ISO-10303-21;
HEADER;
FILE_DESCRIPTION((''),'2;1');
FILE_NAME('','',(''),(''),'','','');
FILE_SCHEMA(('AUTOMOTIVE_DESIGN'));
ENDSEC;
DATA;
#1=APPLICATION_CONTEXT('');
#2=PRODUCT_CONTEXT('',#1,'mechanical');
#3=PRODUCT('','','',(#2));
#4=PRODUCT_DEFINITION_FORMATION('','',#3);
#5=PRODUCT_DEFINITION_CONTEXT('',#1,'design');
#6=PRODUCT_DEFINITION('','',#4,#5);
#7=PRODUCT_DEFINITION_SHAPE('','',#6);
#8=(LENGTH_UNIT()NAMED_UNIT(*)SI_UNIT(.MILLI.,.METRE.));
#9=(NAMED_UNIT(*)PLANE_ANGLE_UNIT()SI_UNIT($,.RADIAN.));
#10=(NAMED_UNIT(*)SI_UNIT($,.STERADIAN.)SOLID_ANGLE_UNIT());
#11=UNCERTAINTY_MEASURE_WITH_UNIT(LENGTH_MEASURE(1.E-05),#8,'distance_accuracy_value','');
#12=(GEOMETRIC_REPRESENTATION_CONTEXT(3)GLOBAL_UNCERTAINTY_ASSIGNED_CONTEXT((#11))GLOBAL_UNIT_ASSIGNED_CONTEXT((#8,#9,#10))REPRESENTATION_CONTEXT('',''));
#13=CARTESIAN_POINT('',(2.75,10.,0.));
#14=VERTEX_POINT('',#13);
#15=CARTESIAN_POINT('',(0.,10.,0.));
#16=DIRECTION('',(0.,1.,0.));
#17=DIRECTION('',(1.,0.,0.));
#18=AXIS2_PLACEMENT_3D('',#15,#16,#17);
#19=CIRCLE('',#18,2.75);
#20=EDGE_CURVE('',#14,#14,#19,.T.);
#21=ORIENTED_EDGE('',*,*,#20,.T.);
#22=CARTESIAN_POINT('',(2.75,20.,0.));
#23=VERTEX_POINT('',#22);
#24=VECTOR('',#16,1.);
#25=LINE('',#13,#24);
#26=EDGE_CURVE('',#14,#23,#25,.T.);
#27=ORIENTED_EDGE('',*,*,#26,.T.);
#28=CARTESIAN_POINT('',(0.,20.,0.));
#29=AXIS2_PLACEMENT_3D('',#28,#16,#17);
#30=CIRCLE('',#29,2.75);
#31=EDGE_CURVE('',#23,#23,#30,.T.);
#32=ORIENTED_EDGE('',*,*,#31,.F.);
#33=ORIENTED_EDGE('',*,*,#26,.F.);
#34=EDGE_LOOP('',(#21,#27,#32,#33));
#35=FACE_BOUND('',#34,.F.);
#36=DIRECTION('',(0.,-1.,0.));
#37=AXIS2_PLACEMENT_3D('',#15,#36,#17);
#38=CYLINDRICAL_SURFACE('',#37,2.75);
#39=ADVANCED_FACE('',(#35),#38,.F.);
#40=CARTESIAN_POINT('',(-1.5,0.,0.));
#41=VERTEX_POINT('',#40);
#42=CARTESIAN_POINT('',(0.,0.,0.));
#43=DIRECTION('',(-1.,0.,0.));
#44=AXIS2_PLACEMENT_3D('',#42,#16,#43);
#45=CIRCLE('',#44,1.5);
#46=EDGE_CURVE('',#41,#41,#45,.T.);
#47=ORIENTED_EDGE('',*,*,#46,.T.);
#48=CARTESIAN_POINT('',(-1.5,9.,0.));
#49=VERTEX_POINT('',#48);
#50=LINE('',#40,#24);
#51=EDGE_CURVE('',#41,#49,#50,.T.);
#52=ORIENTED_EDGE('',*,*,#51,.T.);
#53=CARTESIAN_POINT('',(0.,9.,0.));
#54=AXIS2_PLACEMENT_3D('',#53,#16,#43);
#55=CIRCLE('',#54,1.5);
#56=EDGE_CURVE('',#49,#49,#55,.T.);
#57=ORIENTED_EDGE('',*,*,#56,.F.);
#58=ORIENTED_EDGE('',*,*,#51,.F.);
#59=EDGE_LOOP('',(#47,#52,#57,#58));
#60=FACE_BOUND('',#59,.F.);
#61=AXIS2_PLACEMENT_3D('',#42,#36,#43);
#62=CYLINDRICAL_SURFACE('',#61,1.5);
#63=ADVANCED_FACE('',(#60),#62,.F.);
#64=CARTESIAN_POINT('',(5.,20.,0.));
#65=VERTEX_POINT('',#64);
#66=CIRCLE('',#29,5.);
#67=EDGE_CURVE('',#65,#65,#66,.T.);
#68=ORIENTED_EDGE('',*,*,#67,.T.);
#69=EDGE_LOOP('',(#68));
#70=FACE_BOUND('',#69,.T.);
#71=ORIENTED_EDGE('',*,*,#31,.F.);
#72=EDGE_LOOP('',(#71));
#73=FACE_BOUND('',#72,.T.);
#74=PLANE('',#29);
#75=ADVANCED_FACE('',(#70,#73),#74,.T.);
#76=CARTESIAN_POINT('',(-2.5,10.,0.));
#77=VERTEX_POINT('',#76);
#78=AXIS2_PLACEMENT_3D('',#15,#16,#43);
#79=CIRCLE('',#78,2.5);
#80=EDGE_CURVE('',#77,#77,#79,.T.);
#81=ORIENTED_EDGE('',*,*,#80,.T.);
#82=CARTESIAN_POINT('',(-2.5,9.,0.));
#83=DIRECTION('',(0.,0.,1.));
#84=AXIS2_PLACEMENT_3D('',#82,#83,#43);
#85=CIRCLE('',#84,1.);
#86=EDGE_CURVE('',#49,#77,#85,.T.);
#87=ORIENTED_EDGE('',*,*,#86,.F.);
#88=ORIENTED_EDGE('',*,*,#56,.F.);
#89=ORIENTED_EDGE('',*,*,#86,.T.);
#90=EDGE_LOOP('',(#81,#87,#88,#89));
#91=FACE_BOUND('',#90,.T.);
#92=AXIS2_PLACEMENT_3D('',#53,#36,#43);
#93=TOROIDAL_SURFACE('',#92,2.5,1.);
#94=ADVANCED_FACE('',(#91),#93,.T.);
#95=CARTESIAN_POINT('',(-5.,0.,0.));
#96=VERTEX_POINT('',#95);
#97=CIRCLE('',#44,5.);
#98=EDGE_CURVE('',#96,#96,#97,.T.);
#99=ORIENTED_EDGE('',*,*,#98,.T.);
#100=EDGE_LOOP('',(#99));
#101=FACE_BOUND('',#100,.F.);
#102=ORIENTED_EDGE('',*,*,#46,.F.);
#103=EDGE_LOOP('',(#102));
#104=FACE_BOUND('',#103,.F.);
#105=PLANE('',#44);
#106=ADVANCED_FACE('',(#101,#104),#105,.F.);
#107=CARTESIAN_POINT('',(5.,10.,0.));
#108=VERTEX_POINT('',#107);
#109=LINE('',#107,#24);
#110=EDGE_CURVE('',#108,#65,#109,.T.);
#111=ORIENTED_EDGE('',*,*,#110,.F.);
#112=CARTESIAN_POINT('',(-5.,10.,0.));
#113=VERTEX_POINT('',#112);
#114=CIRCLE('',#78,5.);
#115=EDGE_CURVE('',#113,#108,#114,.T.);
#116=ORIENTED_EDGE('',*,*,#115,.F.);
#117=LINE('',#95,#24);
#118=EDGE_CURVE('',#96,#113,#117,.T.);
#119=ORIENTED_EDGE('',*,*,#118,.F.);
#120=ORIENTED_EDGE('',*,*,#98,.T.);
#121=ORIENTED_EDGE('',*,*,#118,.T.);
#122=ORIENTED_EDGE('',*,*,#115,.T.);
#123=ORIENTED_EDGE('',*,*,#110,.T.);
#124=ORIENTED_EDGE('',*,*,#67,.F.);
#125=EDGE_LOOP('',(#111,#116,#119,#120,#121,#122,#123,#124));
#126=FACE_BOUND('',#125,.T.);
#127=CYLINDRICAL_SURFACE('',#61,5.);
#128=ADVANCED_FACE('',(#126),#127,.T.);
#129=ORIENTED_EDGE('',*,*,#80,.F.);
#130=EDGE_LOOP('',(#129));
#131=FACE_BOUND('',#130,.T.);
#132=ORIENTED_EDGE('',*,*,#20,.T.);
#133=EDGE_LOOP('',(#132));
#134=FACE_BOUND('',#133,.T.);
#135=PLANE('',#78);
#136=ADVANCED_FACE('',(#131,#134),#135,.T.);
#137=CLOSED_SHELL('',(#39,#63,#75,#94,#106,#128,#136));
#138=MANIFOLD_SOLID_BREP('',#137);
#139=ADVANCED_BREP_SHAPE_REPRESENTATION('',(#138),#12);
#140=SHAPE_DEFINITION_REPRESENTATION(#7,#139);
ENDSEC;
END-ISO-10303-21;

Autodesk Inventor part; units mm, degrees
ref_plane "YZ Plane" through (0, 0, 0) normal (1, 0, 0) x (0, 1, 0)
ref_plane "XZ Plane" through (0, 0, 0) normal (0, 1, 0) x (-1, 0, 0)
ref_plane "XY Plane" through (0, 0, 0) normal (0, 0, 1) x (1, 0, 0)
sketch "Sketch1" plane through (0, 0, 0) normal (0, 1, 0) x (-1, 0, 0)
  circle A0 centre (0, 0) radius 5
  circle A1 centre (0, 0) radius 1.5
  dimension "d0" = 10
  dimension "d1" = 3
extrude "Extrusion1" add sketch "Sketch1" along normal blind 10
sketch "Sketch2" plane through (0, 10, 0) normal (0, 1, 0) x (1, 0, 0)
  circle A0 centre (0, 0) radius 2.75
  circle A1 centre (0, 0) radius 5
  dimension "d4" = 5.5
extrude "Extrusion2" add sketch "Sketch2" along normal blind 10
thread "Thread1" size "M3x0.5" class "6H" standard "ANSI Metric M Profile" length 14
fillet "Fillet1" radius 1 1 edges at (1.5, 10, 0)
thread "Thread3" size "M5.5x0.5" class "6H" standard "ANSI Metric M Profile" length 14
properties part number "platform_adapter"
